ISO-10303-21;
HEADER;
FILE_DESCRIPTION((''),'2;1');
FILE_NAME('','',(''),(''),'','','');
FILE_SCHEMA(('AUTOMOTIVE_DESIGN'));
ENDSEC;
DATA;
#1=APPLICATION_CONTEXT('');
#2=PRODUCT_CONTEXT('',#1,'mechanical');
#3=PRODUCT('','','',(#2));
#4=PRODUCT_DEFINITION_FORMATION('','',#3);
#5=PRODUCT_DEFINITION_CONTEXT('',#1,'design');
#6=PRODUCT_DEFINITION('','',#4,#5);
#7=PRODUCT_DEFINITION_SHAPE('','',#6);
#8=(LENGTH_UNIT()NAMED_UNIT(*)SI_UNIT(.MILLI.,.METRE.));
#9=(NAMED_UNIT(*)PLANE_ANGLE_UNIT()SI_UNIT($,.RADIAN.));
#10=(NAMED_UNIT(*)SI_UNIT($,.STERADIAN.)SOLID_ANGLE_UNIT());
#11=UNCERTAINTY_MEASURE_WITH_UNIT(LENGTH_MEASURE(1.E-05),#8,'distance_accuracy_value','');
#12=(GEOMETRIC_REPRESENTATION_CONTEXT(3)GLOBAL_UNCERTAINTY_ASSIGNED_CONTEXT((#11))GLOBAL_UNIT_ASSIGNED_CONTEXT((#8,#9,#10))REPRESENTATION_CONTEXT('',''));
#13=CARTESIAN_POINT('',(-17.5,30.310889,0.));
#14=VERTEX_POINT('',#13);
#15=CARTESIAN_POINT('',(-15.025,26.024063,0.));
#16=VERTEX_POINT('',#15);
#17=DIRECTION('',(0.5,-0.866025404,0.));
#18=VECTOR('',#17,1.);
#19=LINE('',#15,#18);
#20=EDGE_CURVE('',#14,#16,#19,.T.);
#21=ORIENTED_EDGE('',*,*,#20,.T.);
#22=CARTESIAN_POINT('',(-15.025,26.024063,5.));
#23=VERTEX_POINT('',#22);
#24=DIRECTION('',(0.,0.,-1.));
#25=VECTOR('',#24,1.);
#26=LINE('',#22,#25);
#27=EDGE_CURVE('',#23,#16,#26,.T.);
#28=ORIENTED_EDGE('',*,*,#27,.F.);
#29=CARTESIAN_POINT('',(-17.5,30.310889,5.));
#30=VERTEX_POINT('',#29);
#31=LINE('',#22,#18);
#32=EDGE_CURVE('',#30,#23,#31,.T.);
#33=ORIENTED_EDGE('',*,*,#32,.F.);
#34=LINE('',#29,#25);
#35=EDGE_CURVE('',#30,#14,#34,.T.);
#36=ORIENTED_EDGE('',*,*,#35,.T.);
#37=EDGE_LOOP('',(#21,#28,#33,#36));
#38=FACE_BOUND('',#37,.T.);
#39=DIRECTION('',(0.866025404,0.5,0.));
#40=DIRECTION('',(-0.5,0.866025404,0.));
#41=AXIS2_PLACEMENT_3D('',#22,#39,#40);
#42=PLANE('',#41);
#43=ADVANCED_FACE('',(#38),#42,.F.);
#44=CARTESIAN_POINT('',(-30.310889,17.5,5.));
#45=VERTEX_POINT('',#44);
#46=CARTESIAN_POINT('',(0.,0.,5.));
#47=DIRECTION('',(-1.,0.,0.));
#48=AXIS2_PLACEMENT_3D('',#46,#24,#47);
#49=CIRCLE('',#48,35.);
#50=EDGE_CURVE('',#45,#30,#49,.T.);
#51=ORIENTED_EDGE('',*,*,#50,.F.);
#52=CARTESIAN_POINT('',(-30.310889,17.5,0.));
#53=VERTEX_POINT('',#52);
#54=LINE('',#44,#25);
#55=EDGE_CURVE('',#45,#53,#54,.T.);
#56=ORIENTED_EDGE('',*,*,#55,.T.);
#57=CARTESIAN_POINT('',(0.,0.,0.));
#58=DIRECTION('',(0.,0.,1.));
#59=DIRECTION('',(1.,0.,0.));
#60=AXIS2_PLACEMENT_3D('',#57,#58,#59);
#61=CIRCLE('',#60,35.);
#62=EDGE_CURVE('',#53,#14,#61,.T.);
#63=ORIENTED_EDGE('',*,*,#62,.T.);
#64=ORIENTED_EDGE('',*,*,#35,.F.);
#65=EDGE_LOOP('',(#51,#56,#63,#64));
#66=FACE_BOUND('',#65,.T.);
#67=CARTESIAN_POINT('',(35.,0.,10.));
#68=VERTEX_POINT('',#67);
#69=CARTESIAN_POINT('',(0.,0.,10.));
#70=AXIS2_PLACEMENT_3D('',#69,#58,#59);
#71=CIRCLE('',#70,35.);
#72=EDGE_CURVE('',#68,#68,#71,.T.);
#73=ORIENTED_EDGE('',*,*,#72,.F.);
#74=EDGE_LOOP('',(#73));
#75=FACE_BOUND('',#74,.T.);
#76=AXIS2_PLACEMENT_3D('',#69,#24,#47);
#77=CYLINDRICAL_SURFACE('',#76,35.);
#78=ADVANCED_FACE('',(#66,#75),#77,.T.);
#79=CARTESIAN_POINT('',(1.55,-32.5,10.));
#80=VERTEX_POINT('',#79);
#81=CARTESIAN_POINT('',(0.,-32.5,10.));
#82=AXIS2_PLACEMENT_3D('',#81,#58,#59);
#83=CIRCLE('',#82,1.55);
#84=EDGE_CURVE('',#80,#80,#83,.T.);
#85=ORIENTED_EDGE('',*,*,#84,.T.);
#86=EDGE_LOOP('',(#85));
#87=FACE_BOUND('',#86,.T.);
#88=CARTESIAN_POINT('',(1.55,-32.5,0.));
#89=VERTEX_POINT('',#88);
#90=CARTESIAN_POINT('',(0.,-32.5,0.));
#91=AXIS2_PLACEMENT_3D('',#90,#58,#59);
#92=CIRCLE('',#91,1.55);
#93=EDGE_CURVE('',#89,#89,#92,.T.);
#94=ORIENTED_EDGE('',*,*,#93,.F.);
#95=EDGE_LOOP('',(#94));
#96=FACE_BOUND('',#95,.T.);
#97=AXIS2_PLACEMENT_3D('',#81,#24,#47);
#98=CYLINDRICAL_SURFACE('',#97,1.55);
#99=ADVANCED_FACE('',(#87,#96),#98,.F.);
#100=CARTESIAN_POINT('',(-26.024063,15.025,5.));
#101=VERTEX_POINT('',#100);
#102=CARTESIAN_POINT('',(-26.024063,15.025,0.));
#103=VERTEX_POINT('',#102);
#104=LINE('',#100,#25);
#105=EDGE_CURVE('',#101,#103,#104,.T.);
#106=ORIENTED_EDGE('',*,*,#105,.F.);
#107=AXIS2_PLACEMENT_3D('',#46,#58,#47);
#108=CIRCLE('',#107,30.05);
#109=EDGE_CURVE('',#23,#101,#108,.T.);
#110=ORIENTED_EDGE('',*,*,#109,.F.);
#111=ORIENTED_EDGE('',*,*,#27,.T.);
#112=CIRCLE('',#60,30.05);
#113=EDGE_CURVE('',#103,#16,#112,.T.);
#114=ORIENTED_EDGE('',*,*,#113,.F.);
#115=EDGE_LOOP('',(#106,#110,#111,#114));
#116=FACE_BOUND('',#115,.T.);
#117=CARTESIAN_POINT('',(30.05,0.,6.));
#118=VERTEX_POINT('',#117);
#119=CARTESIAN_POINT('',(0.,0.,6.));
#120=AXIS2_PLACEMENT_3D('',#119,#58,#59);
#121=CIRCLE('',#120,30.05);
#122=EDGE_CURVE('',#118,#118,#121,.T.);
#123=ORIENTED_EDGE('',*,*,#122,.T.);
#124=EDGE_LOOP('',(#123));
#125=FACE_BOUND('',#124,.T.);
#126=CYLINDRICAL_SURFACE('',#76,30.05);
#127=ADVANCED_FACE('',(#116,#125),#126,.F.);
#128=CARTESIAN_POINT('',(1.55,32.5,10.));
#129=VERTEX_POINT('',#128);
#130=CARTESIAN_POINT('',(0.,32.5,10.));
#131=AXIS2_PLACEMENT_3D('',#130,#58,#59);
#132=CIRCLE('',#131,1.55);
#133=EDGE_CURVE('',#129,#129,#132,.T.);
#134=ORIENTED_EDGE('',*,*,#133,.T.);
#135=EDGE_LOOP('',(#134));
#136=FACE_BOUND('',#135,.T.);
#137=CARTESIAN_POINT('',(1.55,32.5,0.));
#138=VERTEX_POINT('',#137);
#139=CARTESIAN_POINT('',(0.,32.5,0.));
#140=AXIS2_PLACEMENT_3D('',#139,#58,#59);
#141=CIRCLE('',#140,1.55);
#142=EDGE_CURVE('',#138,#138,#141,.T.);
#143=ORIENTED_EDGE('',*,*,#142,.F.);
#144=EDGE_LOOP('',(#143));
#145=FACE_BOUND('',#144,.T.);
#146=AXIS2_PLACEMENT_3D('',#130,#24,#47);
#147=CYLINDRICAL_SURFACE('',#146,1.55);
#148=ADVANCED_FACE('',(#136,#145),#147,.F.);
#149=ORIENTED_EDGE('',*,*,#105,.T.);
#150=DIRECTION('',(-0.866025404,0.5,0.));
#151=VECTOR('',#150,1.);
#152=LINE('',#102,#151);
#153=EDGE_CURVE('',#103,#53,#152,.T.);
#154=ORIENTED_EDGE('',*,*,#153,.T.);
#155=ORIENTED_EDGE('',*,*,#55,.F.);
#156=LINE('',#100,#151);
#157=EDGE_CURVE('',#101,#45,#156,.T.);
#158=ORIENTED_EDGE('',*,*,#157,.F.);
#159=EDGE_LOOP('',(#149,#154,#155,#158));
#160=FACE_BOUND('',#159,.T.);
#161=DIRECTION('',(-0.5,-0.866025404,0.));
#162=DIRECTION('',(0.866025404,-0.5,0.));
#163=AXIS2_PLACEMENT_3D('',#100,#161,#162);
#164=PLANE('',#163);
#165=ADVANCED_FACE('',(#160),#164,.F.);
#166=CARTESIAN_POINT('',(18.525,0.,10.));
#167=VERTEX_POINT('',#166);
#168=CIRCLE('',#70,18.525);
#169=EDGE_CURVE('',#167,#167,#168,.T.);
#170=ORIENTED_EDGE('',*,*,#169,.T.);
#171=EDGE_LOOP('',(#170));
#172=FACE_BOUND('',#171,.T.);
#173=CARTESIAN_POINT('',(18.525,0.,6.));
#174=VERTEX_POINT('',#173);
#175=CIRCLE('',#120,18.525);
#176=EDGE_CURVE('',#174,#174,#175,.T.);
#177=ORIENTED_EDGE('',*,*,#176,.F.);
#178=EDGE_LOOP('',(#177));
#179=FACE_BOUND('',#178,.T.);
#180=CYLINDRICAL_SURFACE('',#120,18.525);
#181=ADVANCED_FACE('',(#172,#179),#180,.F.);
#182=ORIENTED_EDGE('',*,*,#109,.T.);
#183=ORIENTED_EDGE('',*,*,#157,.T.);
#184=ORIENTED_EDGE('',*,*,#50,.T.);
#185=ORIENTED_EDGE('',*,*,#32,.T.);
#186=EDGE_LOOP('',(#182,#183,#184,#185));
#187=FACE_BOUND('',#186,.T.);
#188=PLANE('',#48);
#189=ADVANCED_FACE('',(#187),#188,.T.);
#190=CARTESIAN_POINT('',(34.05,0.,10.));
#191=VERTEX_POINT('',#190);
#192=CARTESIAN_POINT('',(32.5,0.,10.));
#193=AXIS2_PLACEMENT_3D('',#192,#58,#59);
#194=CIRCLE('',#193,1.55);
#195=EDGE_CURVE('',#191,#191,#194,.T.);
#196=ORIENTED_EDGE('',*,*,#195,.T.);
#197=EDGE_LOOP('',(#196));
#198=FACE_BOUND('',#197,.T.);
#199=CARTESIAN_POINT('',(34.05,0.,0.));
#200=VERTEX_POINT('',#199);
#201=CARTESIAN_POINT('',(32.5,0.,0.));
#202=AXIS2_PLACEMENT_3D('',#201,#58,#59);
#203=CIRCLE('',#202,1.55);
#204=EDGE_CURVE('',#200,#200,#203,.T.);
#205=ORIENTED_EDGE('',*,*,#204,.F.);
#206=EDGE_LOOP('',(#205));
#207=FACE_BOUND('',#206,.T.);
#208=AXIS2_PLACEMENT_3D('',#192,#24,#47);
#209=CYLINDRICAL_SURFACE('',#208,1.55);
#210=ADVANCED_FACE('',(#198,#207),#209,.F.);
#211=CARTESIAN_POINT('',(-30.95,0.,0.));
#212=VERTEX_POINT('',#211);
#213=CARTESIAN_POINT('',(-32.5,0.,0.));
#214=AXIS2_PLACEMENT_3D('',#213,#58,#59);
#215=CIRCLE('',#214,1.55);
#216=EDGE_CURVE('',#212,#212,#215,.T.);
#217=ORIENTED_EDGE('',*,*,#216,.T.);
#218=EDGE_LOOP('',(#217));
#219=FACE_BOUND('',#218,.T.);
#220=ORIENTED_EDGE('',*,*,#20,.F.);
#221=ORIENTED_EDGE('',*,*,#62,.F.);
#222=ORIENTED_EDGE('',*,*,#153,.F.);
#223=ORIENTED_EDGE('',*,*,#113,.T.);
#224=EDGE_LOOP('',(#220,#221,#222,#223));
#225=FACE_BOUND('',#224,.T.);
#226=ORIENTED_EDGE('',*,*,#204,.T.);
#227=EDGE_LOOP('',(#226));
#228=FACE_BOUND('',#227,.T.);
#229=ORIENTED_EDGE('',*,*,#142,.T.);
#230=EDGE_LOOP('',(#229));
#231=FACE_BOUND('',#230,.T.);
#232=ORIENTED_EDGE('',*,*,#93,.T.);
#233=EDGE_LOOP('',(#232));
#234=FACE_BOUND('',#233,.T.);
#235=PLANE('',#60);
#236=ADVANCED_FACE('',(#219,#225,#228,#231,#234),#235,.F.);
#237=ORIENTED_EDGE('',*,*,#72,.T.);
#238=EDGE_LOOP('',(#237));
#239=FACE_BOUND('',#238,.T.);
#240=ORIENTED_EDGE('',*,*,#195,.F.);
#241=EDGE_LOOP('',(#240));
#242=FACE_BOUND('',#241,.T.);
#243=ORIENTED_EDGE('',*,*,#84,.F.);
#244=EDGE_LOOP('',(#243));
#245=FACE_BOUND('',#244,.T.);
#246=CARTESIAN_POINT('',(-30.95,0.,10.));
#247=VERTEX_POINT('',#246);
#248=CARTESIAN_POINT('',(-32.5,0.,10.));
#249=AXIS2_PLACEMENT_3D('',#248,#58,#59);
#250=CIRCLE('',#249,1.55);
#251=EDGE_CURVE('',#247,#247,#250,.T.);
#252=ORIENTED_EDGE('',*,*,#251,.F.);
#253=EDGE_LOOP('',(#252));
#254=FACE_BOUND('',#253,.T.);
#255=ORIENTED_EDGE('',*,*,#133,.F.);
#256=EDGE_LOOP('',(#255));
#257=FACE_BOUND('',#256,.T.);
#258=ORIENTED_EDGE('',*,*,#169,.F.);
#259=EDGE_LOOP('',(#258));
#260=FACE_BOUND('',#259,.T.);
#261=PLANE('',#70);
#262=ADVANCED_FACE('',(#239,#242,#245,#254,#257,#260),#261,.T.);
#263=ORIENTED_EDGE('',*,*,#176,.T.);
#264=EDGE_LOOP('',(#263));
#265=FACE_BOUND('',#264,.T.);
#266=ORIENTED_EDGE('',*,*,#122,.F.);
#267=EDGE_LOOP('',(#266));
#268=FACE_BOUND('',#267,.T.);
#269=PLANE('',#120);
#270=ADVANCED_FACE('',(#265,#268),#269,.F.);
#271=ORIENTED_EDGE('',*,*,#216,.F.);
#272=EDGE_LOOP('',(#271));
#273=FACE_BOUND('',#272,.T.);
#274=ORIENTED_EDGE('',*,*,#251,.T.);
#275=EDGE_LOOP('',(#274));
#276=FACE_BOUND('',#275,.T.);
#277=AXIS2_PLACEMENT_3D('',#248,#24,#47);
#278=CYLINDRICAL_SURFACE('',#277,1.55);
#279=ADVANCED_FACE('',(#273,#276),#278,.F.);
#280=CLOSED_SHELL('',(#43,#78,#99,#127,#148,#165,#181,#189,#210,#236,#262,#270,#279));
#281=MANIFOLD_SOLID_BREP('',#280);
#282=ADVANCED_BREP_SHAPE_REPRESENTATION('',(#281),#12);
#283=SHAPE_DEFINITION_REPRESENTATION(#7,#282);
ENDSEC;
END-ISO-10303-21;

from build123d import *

# Parameters (mm, degrees)
EXTRUDE_1_OUTLINE_R   = 35
EXTRUDE_1_OUTLINE_R_2 = 1.55
EXTRUDE_1_OUTLINE_R_3 = 30.05
EXTRUDE_1_DEPTH       = 10
SKETCH_2_R            = 33.525
SKETCH_2_R_2          = 18.525
EXTRUDE_1_2_DEPTH     = 4
SKETCH_3_R            = 1.55
CUT_EXTRUDE_1_DEPTH   = 51.497524692
CUT_EXTRUDE_2_DEPTH   = 5


# Read off the part's stored shape, not the designer's step: 凸台-拉伸1
with BuildPart() as part:
    # Extrude 1 outline → Extrude 1 (new body)
    with BuildSketch(Plane.XY):
        Circle(EXTRUDE_1_OUTLINE_R)
        with Locations((0, -32.5)):
            Circle(EXTRUDE_1_OUTLINE_R_2, mode=Mode.SUBTRACT)
        with Locations((-32.5, 0)):
            Circle(EXTRUDE_1_OUTLINE_R_2, mode=Mode.SUBTRACT)
        Circle(EXTRUDE_1_OUTLINE_R_3, mode=Mode.SUBTRACT)
        with Locations((32.5, 0)):
            Circle(EXTRUDE_1_OUTLINE_R_2, mode=Mode.SUBTRACT)
        with Locations((0, 32.5)):
            Circle(EXTRUDE_1_OUTLINE_R_2, mode=Mode.SUBTRACT)
    extrude(amount=EXTRUDE_1_DEPTH)

    # 草图2 → Extrude 1 2 (add)
    with BuildSketch(Plane.XY.offset(10)):
        Circle(SKETCH_2_R)
        Circle(SKETCH_2_R_2, mode=Mode.SUBTRACT)
    extrude(amount=-EXTRUDE_1_2_DEPTH)

    # 草图3 → 切除-拉伸1 (cut, through all)
    with BuildSketch(Plane(origin=(0, 0, 0), x_dir=(-1, 0, 0), z_dir=(0, 0, -1))):
        with Locations(Location((32.5, 0, 0), (0, 0, 180))):
            Circle(SKETCH_3_R)
        with Locations(Location((0, -32.5, 0), (0, 0, 180))):
            Circle(SKETCH_3_R)
        with Locations(Location((-32.5, 0, 0), (0, 0, 180))):
            Circle(SKETCH_3_R)
        with Locations(Location((0, 32.5, 0), (0, 0, 180))):
            Circle(SKETCH_3_R)
    extrude(amount=-CUT_EXTRUDE_1_DEPTH, mode=Mode.SUBTRACT)

    # 草图7 → 切除-拉伸2 (cut)
    with BuildSketch(Plane(origin=(0, 0, 0), x_dir=(-1, 0, 0), z_dir=(0, 0, -1))):
        with BuildLine():
            Line((15.025, 26.024063384), (17.5, 30.310889132))
            ThreePointArc((17.5, 30.310889132), (24.748737342, 24.748737342), (30.310889132, 17.5))
            Line((30.310889132, 17.5), (26.024063384, 15.025))
            ThreePointArc((26.024063384, 15.025), (21.248558775, 21.248558775), (15.025, 26.024063384))
        make_face()
    extrude(amount=-CUT_EXTRUDE_2_DEPTH, mode=Mode.SUBTRACT)


solid = part.part
